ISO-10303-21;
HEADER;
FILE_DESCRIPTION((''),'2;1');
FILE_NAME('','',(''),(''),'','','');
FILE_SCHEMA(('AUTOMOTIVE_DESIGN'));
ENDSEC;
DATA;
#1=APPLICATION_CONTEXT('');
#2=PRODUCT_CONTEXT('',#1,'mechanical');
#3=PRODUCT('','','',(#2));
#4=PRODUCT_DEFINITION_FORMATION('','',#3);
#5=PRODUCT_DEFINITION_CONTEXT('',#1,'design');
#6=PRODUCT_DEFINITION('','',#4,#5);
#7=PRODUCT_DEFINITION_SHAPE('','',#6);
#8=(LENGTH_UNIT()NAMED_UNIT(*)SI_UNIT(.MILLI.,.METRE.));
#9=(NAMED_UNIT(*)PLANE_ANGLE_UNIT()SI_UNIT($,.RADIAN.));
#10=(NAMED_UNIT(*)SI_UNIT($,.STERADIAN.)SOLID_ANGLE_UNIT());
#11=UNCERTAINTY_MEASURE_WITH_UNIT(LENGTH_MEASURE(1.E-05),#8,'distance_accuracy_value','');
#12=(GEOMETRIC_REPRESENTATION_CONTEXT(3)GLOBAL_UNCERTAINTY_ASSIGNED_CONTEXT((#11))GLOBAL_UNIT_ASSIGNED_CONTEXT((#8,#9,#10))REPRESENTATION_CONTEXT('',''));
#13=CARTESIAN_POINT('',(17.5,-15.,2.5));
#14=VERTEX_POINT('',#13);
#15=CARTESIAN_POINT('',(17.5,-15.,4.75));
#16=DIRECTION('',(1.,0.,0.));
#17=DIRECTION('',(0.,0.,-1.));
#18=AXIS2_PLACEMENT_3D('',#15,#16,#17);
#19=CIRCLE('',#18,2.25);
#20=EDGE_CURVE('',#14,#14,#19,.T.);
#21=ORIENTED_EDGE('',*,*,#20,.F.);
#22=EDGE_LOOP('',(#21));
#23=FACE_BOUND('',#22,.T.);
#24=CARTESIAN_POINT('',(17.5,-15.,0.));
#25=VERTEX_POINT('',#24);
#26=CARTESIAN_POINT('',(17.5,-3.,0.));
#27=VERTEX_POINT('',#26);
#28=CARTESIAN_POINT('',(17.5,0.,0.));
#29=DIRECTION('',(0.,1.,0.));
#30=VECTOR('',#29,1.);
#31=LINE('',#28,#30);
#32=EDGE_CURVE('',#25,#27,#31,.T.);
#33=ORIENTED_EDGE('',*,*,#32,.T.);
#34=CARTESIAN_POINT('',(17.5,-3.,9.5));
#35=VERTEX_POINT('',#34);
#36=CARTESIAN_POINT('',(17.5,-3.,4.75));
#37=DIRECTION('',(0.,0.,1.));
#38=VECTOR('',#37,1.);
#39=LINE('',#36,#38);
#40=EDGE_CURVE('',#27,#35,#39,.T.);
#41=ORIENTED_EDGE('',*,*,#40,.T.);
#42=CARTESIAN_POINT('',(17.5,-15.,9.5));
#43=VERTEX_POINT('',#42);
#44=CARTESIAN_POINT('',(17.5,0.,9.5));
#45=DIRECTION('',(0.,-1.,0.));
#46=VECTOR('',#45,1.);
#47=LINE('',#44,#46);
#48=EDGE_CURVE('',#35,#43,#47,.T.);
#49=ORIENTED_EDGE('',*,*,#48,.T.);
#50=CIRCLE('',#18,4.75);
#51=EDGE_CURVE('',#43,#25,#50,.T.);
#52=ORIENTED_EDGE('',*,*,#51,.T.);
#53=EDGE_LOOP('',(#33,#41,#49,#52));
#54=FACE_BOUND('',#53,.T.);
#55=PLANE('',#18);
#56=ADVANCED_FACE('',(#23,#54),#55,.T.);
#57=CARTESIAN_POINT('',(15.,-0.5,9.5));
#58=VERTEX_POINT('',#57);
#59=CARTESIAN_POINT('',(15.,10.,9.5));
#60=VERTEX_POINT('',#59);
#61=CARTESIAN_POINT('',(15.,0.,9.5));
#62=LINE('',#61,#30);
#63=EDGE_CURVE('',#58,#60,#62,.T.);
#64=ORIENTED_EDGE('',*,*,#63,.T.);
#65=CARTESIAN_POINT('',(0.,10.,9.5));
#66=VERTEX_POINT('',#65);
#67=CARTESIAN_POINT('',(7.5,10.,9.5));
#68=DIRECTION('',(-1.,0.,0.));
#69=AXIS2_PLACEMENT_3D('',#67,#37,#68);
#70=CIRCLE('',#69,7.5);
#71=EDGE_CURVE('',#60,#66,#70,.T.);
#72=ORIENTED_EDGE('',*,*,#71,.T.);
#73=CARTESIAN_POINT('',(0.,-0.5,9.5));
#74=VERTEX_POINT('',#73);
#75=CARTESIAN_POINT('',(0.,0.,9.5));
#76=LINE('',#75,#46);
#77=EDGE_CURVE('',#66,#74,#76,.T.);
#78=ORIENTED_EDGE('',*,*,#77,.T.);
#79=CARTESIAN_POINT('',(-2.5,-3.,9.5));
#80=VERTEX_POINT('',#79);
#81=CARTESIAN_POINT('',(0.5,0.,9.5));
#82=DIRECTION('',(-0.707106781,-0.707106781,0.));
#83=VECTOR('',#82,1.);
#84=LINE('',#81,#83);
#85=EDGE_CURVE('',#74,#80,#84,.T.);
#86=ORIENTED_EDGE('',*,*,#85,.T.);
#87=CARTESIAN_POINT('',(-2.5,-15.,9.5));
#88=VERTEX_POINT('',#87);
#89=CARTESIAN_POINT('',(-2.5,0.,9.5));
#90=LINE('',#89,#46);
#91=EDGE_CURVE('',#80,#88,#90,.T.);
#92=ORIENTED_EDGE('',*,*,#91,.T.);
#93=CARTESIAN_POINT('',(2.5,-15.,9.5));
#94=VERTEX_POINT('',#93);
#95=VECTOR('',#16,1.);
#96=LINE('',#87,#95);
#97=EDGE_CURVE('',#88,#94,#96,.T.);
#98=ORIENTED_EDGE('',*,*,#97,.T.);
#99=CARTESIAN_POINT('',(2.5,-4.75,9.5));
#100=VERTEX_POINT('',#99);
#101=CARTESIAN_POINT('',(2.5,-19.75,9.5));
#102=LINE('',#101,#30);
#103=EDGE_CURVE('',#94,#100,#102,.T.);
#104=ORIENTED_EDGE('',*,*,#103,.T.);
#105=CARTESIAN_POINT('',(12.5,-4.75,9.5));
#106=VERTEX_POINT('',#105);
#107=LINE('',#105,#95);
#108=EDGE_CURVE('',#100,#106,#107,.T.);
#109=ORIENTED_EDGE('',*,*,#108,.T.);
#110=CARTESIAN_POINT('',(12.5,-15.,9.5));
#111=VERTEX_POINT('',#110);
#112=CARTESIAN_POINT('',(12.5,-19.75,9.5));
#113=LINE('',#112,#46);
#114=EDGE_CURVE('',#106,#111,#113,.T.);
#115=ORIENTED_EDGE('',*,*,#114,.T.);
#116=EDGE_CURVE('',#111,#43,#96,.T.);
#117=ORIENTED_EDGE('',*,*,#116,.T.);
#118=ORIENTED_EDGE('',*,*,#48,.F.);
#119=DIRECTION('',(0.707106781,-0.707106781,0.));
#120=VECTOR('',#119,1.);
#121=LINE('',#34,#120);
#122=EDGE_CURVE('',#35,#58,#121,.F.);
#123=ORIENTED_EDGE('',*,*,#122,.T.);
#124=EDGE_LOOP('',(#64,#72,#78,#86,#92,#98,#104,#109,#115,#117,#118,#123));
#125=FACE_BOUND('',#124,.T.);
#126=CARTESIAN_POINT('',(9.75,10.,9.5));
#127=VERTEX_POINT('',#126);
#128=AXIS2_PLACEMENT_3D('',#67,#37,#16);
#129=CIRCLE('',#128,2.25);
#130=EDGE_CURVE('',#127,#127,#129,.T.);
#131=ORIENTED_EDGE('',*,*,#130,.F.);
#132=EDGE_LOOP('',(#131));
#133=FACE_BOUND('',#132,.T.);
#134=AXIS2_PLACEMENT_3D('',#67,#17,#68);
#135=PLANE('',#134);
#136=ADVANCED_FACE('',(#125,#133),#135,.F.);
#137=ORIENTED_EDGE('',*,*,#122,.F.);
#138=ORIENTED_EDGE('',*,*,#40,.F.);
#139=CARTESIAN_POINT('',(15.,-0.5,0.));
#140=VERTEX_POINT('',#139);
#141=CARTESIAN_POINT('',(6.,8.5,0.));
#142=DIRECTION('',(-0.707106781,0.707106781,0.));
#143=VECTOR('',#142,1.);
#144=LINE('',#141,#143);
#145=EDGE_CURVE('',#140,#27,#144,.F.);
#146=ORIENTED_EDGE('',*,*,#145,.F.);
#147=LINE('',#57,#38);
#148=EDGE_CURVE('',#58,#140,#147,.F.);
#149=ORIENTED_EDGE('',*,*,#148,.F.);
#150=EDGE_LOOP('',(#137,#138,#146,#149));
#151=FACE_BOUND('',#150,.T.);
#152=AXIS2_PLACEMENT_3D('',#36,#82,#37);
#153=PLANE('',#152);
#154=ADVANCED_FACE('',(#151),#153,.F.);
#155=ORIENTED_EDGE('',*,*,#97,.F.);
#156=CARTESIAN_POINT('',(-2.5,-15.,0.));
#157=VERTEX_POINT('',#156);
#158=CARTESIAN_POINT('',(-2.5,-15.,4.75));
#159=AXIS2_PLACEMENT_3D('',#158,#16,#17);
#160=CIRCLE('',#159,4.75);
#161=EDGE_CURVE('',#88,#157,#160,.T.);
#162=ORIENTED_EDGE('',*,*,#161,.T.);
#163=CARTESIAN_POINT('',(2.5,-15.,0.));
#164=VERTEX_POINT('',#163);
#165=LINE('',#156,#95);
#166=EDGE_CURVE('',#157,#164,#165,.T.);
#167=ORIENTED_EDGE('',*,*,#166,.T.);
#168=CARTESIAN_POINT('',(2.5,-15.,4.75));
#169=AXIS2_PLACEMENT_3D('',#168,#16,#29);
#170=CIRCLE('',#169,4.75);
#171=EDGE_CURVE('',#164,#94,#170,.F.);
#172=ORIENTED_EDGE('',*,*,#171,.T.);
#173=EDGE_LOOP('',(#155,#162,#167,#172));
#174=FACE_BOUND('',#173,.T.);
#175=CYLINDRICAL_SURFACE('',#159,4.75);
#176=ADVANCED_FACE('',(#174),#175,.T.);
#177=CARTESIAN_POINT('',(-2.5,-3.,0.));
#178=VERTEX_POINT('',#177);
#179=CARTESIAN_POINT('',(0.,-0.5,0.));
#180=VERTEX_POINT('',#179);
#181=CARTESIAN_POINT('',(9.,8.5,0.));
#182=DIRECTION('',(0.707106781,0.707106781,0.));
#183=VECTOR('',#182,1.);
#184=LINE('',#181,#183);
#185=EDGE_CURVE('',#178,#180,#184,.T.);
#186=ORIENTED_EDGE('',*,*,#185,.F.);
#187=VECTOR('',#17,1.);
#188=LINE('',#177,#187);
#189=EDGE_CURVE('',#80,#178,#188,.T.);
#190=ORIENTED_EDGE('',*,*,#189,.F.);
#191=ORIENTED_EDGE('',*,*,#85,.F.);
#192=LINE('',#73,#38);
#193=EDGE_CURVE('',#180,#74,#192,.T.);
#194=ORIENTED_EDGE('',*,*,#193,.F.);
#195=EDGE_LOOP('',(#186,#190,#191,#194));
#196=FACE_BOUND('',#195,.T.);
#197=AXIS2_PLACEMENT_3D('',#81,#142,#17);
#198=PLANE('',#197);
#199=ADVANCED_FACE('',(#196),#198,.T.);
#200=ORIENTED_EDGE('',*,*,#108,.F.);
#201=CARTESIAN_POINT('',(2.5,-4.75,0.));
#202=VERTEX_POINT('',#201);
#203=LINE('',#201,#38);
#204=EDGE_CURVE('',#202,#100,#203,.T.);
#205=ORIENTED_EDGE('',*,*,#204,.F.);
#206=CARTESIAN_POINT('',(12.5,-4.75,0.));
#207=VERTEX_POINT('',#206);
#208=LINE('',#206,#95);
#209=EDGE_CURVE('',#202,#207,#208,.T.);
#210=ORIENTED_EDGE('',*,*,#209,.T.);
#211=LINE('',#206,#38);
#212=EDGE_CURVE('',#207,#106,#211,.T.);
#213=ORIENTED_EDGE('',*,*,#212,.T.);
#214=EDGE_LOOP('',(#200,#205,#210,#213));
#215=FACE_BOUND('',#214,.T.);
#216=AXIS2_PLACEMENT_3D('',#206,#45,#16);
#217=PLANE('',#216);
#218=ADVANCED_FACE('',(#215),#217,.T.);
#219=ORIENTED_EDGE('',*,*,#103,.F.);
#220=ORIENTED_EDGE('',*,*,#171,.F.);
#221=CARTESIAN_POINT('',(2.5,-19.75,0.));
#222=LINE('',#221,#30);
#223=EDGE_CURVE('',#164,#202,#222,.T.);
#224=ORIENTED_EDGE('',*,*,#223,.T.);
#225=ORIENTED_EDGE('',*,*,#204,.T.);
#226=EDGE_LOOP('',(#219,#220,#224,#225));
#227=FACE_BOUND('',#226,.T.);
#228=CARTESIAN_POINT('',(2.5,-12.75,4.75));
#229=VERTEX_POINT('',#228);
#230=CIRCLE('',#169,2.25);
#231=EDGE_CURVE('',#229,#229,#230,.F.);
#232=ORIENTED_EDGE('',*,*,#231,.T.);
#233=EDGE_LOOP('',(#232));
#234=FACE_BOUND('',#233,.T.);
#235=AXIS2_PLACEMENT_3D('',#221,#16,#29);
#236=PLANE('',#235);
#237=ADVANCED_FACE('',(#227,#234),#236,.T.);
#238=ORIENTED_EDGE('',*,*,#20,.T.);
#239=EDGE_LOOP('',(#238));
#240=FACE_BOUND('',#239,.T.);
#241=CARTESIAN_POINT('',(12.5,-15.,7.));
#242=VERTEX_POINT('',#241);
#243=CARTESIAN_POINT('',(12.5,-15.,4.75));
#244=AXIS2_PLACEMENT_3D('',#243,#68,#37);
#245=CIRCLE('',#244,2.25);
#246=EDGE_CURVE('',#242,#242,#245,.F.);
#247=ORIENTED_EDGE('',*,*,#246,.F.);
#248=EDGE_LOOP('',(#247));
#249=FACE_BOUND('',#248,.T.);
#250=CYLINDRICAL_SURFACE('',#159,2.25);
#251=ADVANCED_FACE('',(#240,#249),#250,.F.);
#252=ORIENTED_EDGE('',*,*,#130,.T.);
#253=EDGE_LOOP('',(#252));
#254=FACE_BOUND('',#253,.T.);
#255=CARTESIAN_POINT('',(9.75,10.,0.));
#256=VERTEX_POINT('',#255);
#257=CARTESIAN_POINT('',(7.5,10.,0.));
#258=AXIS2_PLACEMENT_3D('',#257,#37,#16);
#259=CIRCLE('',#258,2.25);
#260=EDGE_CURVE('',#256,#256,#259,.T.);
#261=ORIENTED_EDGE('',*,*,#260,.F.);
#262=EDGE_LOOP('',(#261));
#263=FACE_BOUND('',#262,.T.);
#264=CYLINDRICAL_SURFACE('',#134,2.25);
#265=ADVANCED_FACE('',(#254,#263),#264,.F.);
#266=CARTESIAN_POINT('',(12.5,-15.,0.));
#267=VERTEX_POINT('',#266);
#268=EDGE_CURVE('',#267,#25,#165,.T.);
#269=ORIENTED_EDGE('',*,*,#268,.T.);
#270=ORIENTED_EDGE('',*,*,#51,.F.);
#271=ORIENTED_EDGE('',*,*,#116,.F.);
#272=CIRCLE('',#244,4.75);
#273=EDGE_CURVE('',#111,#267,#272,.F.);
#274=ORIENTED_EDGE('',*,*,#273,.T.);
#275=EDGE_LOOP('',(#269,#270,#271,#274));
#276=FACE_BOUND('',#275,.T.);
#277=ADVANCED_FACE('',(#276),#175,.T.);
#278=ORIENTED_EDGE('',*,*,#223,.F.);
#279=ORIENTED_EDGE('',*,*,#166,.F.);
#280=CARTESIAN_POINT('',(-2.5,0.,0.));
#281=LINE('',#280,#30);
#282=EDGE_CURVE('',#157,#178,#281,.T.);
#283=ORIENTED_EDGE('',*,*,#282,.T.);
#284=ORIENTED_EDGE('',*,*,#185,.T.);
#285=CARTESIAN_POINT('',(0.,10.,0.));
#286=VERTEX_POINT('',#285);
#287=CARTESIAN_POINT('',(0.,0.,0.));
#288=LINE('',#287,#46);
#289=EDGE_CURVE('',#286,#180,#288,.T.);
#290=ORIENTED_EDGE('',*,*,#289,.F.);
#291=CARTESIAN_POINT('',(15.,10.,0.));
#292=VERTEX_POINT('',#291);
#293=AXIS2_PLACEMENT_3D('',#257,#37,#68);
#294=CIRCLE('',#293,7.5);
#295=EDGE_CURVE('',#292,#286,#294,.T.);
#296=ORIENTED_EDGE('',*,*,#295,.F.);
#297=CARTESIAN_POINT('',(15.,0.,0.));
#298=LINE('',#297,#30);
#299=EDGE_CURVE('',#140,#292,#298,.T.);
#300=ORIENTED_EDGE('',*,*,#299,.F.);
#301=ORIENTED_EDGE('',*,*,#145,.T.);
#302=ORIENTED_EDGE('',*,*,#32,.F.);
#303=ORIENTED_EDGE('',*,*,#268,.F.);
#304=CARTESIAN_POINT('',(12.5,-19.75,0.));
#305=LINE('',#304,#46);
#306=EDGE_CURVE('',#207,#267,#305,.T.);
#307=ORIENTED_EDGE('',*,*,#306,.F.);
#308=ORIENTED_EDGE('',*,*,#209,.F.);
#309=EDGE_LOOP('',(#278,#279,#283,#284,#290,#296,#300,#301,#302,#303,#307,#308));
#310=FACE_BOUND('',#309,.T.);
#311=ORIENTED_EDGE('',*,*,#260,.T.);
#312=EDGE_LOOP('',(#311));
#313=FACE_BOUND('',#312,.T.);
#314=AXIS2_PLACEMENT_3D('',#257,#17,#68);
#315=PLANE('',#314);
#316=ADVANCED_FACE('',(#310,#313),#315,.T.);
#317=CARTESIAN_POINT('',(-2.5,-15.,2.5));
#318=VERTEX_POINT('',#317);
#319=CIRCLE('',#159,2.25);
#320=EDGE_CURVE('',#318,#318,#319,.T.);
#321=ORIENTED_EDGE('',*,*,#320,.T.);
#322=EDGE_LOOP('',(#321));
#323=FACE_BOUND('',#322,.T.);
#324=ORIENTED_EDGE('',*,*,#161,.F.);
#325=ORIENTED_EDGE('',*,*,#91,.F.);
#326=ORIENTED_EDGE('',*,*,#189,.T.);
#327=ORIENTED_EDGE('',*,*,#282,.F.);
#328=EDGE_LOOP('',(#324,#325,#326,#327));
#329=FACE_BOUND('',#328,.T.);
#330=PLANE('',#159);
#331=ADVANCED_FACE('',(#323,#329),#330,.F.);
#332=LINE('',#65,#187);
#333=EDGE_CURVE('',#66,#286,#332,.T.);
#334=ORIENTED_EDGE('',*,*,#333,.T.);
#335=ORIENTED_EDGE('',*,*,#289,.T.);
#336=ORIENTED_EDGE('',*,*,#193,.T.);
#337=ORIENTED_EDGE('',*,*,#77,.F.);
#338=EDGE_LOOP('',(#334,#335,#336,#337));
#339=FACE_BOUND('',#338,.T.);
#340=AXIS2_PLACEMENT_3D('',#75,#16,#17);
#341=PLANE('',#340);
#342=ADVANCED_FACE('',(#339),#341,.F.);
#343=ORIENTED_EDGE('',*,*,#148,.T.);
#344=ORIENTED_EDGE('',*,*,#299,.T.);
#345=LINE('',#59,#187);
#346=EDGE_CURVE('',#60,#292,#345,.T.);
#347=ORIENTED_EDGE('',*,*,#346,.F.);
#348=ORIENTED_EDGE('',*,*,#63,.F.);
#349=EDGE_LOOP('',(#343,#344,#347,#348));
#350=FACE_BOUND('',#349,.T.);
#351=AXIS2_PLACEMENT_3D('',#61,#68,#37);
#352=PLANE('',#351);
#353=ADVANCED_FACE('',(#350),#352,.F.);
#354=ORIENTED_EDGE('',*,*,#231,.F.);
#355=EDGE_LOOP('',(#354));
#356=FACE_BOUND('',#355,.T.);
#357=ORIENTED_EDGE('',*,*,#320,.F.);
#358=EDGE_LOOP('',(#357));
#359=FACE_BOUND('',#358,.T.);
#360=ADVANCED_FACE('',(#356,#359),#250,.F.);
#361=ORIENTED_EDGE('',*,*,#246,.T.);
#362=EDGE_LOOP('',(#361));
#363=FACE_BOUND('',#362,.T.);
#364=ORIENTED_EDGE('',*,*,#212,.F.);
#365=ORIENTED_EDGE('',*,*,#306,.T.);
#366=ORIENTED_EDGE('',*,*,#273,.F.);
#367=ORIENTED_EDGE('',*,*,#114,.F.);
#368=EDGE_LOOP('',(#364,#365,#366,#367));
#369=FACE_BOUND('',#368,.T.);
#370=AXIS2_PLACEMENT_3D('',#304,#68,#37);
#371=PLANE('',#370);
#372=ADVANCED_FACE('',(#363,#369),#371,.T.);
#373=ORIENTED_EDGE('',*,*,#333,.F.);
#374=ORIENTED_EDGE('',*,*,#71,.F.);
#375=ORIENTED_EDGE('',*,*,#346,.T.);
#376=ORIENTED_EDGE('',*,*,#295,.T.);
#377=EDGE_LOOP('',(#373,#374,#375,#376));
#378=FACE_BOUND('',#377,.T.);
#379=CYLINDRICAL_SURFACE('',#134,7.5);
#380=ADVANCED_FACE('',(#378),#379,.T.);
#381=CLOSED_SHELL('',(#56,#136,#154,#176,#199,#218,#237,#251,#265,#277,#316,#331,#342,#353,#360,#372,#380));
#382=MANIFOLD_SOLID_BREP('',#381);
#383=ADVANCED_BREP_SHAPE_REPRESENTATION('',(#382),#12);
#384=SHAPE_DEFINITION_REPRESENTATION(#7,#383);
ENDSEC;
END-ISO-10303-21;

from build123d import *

# Parameters (mm, degrees)
SKETCH1_R                = 2.25
BOSS_EXTRUDE1_DEPTH      = 9.5
BOSS_EXTRUDE2_DEPTH      = 10
BOSS_EXTRUDE2_DEPTH_BACK = 10
SKETCH2_R                = 2.25
SKETCH4_W                = 10
SKETCH4_H                = 15
CUT_EXTRUDE1_DEPTH       = 25.986246217
CHAMFER1_SIZE            = 3


with BuildPart() as part:
    # Sketch1 → Boss-Extrude1 (new body)
    with BuildSketch(Plane.XY):
        with BuildLine():
            Line((0, 0), (15, 0))
            Line((15, 0), (15, 10))
            ThreePointArc((15, 10), (7.5, 17.5), (0, 10))
            Line((0, 10), (0, 0))
        make_face()
        with Locations((7.5, 10)):
            Circle(SKETCH1_R, mode=Mode.SUBTRACT)
    extrude(amount=BOSS_EXTRUDE1_DEPTH)

    # Sketch2 → Boss-Extrude2 (add, two sides: drawn at the far end of the back side and taken through both)
    with BuildSketch(Plane(origin=(7.5, 0, 0), x_dir=(0, 0, -1), z_dir=(1, 0, 0)).offset(-BOSS_EXTRUDE2_DEPTH_BACK)):
        with BuildLine():
            Line((-9.5, 0), (-9.5, -15))
            ThreePointArc((-9.5, -15), (-4.75, -19.75), (0, -15))
            Line((0, -15), (0, 0))
            Line((0, 0), (-9.5, 0))
        make_face()
        with Locations((-4.75, -15)):
            Circle(SKETCH2_R, mode=Mode.SUBTRACT)
    extrude(amount=BOSS_EXTRUDE2_DEPTH + BOSS_EXTRUDE2_DEPTH_BACK)

    # Sketch4 → Cut-Extrude1 (cut, through all)
    with BuildSketch(Plane(origin=(5.5, 0, 9.5), x_dir=(-1, 0, 0), z_dir=(0, 0, -1))):
        with Locations((-2, -12.25)):
            Rectangle(SKETCH4_W, SKETCH4_H)
    extrude(amount=CUT_EXTRUDE1_DEPTH, mode=Mode.SUBTRACT)

    # Chamfer1
    # the kernel refuses this chamfer: 3 mm, written as the material it takes off along each edge
    with BuildSketch(Plane(origin=(-2.5, 0, -7.715048964), x_dir=(0.9996219169112968, 0.027495876610586372, 0), z_dir=(0, 0, 1))) as chamfer1_piece_1_section:
        Polygon((CHAMFER1_SIZE * 0.999621916911, -CHAMFER1_SIZE * 0.0274958766106), (-CHAMFER1_SIZE * 0.0274958766106, -CHAMFER1_SIZE * 0.999621916911), (0, 0), align=None)
    chamfer1_piece_1 = extrude(amount=24.930097928, mode=Mode.PRIVATE)
    chamfer1_piece_1 = split(chamfer1_piece_1, bisect_by=Plane(origin=(0, -1.026079574, 4.75), z_dir=(-1, 0, 0)), keep=Keep.TOP, mode=Mode.PRIVATE)
    add(chamfer1_piece_1, mode=Mode.SUBTRACT)
    with BuildSketch(Plane(origin=(17.5, 0, -7.715048964), x_dir=(0.027495876610586778, -0.9996219169112968, 0), z_dir=(0, 0, 1))) as chamfer1_piece_2_section:
        Polygon((CHAMFER1_SIZE * 0.999621916911, -CHAMFER1_SIZE * 0.0274958766106), (-CHAMFER1_SIZE * 0.0274958766106, -CHAMFER1_SIZE * 0.999621916911), (0, 0), align=None)
    chamfer1_piece_2 = extrude(amount=24.930097928, mode=Mode.PRIVATE)
    chamfer1_piece_2 = split(chamfer1_piece_2, bisect_by=Plane(origin=(15, -1.026079574, 4.75), z_dir=(1, 0, 0)), keep=Keep.TOP, mode=Mode.PRIVATE)
    add(chamfer1_piece_2, mode=Mode.SUBTRACT)


solid = part.part
